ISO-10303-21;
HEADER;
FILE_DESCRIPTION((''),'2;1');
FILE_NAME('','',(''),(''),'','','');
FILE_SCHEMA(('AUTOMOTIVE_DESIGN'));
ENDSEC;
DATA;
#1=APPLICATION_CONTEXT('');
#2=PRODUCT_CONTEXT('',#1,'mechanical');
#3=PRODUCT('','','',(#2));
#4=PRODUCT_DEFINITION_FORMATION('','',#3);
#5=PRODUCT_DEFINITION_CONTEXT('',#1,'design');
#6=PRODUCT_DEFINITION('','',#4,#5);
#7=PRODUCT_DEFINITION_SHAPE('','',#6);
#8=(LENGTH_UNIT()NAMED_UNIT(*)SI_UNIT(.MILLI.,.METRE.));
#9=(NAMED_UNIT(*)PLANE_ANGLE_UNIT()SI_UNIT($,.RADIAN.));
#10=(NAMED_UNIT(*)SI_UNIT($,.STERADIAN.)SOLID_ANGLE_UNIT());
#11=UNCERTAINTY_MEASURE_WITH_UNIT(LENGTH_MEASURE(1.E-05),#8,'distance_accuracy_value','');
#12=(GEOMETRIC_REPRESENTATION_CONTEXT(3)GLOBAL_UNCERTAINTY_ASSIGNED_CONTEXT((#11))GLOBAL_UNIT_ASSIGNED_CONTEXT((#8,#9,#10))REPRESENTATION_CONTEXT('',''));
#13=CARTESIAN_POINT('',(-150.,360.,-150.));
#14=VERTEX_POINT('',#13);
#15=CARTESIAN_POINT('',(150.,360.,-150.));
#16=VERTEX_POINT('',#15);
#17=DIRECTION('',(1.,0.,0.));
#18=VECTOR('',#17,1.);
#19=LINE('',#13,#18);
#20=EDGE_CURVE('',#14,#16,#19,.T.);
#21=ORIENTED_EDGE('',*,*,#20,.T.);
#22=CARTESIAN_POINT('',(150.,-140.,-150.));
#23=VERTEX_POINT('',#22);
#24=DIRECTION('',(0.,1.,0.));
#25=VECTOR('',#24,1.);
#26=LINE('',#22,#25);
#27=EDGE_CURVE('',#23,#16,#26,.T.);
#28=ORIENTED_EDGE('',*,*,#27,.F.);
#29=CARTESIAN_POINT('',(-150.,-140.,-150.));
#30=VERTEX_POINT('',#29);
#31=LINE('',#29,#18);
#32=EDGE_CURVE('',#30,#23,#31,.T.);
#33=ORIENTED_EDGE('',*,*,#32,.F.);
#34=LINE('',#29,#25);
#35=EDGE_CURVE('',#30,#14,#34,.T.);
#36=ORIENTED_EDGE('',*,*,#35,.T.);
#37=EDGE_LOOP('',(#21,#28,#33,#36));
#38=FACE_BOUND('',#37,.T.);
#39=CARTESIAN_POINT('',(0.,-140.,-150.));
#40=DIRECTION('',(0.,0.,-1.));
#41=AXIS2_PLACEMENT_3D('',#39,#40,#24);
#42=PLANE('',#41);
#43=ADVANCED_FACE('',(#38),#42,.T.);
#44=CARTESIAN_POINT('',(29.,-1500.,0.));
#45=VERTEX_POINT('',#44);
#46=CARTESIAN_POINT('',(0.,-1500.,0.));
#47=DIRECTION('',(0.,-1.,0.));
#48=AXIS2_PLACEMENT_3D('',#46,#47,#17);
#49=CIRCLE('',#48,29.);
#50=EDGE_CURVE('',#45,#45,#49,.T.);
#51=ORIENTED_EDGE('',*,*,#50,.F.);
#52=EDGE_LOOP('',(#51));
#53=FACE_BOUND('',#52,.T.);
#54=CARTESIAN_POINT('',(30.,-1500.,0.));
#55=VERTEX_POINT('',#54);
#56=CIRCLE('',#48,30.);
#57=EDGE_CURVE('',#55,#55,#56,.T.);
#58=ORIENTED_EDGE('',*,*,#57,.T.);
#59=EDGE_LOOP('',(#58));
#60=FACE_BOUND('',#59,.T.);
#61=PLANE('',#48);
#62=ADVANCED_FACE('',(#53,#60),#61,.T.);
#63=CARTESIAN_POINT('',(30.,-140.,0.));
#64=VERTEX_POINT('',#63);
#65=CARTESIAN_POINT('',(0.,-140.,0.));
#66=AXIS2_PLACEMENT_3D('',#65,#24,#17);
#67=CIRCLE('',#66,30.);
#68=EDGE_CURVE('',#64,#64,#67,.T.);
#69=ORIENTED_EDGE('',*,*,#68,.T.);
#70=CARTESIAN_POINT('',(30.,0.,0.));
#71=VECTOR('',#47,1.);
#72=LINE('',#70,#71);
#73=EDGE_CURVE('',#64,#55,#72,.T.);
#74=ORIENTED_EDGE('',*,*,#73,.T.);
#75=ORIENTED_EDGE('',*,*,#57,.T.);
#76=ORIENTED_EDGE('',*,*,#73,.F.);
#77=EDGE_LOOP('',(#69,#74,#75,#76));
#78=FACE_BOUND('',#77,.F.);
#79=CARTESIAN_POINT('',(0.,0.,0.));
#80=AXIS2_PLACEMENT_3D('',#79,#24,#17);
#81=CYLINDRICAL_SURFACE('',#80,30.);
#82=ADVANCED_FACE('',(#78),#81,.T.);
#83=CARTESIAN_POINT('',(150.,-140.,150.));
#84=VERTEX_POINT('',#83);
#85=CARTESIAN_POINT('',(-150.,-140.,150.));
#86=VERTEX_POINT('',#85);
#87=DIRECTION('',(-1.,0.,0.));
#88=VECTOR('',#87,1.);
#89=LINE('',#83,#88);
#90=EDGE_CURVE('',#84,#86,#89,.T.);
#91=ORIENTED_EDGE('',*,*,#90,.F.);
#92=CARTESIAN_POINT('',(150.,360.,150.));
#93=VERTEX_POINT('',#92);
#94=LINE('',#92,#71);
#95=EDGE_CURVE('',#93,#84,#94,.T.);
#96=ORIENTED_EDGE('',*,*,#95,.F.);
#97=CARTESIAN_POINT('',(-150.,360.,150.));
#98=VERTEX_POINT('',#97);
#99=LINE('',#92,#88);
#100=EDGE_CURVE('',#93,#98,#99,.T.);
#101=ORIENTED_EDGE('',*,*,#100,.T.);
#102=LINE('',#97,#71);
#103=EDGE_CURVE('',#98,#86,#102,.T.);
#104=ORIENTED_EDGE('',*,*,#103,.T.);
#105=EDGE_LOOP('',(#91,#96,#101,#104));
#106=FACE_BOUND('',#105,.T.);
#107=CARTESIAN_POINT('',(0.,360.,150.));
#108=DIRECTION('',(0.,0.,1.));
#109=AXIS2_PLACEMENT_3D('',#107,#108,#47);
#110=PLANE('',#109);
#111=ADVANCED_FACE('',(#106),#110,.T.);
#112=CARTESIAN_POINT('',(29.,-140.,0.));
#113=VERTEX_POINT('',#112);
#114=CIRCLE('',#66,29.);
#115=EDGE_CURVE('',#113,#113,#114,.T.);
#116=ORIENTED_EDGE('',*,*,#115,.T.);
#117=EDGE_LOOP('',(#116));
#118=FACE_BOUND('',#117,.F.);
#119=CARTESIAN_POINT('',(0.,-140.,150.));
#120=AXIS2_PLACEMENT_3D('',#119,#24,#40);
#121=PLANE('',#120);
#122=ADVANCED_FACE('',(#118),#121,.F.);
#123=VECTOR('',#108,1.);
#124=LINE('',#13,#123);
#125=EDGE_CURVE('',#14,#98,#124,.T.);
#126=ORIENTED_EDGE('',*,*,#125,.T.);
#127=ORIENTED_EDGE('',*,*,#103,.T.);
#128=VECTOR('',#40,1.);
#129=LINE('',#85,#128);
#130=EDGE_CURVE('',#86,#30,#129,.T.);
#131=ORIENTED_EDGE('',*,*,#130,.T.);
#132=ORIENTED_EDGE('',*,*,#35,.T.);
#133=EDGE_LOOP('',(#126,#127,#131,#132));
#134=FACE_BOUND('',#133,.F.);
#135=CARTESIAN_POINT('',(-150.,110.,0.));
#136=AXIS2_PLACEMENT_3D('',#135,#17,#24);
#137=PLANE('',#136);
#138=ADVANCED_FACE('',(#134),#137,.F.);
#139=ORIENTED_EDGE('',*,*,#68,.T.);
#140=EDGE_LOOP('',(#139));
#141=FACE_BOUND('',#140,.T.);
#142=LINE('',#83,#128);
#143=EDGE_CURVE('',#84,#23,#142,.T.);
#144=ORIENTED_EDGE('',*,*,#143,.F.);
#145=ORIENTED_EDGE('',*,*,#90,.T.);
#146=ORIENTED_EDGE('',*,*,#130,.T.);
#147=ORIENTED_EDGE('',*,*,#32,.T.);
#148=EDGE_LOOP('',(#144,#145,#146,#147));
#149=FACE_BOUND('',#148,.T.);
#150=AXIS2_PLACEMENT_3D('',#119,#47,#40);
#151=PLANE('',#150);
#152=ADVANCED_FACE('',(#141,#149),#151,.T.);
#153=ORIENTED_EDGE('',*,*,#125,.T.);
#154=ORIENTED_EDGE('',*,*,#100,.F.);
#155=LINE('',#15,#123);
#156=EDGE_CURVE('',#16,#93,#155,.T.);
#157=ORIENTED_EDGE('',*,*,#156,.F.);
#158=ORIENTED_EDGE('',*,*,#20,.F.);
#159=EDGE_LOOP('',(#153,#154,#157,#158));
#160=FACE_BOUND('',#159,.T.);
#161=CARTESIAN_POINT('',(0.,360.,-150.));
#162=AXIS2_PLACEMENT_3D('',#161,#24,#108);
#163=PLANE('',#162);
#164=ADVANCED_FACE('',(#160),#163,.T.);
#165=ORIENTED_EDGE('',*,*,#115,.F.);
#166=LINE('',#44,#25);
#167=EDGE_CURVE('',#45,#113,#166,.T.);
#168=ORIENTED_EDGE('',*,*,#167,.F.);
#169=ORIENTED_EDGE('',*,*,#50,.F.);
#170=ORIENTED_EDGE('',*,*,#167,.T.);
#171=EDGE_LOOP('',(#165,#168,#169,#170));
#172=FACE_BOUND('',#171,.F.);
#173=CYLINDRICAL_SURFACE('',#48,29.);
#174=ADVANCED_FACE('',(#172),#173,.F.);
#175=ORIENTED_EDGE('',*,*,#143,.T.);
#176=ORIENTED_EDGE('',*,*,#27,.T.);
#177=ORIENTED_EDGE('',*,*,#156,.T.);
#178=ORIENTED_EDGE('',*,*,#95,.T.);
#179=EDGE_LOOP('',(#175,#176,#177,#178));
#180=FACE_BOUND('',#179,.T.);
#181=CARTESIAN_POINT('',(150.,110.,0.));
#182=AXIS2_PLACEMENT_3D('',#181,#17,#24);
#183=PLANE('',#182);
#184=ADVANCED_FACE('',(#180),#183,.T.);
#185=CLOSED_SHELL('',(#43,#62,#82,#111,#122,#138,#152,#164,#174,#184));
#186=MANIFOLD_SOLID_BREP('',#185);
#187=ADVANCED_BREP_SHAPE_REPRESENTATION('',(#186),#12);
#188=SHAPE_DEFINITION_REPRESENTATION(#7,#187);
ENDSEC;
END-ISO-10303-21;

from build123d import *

# Parameters (mm, degrees)
F0_R          = 30
F1_DEPTH      = 1500
F2_R          = 29
F3_DEPTH      = 1500
F7_DEPTH      = 150
F7_DEPTH_BACK = 150


# Not quite as in the source:
# - the program builds the solid bodies; features that only make, move or delete a surface that nothing else refers to are left out


with BuildPart() as f1:
    # F0 (on Front) → F1 (new body)
    with BuildSketch(Plane.XZ):
        Circle(F0_R)
    extrude(amount=F1_DEPTH)

    # F2 (on face) → F3 (cut)
    with BuildSketch(Plane.XZ.offset(1500)):
        Circle(F2_R)
    extrude(amount=-F3_DEPTH, mode=Mode.SUBTRACT)

    # F6 (on Right) → F7 (join, two sides)
    with BuildSketch(Plane.YZ) as f7_sk:
        Polygon((-140, 150), (-140, 0), (-140, -150), (360, -150), (360, 150), align=None)
    extrude(amount=F7_DEPTH)
    extrude(f7_sk.sketch, amount=-F7_DEPTH_BACK)


solid = f1.part
